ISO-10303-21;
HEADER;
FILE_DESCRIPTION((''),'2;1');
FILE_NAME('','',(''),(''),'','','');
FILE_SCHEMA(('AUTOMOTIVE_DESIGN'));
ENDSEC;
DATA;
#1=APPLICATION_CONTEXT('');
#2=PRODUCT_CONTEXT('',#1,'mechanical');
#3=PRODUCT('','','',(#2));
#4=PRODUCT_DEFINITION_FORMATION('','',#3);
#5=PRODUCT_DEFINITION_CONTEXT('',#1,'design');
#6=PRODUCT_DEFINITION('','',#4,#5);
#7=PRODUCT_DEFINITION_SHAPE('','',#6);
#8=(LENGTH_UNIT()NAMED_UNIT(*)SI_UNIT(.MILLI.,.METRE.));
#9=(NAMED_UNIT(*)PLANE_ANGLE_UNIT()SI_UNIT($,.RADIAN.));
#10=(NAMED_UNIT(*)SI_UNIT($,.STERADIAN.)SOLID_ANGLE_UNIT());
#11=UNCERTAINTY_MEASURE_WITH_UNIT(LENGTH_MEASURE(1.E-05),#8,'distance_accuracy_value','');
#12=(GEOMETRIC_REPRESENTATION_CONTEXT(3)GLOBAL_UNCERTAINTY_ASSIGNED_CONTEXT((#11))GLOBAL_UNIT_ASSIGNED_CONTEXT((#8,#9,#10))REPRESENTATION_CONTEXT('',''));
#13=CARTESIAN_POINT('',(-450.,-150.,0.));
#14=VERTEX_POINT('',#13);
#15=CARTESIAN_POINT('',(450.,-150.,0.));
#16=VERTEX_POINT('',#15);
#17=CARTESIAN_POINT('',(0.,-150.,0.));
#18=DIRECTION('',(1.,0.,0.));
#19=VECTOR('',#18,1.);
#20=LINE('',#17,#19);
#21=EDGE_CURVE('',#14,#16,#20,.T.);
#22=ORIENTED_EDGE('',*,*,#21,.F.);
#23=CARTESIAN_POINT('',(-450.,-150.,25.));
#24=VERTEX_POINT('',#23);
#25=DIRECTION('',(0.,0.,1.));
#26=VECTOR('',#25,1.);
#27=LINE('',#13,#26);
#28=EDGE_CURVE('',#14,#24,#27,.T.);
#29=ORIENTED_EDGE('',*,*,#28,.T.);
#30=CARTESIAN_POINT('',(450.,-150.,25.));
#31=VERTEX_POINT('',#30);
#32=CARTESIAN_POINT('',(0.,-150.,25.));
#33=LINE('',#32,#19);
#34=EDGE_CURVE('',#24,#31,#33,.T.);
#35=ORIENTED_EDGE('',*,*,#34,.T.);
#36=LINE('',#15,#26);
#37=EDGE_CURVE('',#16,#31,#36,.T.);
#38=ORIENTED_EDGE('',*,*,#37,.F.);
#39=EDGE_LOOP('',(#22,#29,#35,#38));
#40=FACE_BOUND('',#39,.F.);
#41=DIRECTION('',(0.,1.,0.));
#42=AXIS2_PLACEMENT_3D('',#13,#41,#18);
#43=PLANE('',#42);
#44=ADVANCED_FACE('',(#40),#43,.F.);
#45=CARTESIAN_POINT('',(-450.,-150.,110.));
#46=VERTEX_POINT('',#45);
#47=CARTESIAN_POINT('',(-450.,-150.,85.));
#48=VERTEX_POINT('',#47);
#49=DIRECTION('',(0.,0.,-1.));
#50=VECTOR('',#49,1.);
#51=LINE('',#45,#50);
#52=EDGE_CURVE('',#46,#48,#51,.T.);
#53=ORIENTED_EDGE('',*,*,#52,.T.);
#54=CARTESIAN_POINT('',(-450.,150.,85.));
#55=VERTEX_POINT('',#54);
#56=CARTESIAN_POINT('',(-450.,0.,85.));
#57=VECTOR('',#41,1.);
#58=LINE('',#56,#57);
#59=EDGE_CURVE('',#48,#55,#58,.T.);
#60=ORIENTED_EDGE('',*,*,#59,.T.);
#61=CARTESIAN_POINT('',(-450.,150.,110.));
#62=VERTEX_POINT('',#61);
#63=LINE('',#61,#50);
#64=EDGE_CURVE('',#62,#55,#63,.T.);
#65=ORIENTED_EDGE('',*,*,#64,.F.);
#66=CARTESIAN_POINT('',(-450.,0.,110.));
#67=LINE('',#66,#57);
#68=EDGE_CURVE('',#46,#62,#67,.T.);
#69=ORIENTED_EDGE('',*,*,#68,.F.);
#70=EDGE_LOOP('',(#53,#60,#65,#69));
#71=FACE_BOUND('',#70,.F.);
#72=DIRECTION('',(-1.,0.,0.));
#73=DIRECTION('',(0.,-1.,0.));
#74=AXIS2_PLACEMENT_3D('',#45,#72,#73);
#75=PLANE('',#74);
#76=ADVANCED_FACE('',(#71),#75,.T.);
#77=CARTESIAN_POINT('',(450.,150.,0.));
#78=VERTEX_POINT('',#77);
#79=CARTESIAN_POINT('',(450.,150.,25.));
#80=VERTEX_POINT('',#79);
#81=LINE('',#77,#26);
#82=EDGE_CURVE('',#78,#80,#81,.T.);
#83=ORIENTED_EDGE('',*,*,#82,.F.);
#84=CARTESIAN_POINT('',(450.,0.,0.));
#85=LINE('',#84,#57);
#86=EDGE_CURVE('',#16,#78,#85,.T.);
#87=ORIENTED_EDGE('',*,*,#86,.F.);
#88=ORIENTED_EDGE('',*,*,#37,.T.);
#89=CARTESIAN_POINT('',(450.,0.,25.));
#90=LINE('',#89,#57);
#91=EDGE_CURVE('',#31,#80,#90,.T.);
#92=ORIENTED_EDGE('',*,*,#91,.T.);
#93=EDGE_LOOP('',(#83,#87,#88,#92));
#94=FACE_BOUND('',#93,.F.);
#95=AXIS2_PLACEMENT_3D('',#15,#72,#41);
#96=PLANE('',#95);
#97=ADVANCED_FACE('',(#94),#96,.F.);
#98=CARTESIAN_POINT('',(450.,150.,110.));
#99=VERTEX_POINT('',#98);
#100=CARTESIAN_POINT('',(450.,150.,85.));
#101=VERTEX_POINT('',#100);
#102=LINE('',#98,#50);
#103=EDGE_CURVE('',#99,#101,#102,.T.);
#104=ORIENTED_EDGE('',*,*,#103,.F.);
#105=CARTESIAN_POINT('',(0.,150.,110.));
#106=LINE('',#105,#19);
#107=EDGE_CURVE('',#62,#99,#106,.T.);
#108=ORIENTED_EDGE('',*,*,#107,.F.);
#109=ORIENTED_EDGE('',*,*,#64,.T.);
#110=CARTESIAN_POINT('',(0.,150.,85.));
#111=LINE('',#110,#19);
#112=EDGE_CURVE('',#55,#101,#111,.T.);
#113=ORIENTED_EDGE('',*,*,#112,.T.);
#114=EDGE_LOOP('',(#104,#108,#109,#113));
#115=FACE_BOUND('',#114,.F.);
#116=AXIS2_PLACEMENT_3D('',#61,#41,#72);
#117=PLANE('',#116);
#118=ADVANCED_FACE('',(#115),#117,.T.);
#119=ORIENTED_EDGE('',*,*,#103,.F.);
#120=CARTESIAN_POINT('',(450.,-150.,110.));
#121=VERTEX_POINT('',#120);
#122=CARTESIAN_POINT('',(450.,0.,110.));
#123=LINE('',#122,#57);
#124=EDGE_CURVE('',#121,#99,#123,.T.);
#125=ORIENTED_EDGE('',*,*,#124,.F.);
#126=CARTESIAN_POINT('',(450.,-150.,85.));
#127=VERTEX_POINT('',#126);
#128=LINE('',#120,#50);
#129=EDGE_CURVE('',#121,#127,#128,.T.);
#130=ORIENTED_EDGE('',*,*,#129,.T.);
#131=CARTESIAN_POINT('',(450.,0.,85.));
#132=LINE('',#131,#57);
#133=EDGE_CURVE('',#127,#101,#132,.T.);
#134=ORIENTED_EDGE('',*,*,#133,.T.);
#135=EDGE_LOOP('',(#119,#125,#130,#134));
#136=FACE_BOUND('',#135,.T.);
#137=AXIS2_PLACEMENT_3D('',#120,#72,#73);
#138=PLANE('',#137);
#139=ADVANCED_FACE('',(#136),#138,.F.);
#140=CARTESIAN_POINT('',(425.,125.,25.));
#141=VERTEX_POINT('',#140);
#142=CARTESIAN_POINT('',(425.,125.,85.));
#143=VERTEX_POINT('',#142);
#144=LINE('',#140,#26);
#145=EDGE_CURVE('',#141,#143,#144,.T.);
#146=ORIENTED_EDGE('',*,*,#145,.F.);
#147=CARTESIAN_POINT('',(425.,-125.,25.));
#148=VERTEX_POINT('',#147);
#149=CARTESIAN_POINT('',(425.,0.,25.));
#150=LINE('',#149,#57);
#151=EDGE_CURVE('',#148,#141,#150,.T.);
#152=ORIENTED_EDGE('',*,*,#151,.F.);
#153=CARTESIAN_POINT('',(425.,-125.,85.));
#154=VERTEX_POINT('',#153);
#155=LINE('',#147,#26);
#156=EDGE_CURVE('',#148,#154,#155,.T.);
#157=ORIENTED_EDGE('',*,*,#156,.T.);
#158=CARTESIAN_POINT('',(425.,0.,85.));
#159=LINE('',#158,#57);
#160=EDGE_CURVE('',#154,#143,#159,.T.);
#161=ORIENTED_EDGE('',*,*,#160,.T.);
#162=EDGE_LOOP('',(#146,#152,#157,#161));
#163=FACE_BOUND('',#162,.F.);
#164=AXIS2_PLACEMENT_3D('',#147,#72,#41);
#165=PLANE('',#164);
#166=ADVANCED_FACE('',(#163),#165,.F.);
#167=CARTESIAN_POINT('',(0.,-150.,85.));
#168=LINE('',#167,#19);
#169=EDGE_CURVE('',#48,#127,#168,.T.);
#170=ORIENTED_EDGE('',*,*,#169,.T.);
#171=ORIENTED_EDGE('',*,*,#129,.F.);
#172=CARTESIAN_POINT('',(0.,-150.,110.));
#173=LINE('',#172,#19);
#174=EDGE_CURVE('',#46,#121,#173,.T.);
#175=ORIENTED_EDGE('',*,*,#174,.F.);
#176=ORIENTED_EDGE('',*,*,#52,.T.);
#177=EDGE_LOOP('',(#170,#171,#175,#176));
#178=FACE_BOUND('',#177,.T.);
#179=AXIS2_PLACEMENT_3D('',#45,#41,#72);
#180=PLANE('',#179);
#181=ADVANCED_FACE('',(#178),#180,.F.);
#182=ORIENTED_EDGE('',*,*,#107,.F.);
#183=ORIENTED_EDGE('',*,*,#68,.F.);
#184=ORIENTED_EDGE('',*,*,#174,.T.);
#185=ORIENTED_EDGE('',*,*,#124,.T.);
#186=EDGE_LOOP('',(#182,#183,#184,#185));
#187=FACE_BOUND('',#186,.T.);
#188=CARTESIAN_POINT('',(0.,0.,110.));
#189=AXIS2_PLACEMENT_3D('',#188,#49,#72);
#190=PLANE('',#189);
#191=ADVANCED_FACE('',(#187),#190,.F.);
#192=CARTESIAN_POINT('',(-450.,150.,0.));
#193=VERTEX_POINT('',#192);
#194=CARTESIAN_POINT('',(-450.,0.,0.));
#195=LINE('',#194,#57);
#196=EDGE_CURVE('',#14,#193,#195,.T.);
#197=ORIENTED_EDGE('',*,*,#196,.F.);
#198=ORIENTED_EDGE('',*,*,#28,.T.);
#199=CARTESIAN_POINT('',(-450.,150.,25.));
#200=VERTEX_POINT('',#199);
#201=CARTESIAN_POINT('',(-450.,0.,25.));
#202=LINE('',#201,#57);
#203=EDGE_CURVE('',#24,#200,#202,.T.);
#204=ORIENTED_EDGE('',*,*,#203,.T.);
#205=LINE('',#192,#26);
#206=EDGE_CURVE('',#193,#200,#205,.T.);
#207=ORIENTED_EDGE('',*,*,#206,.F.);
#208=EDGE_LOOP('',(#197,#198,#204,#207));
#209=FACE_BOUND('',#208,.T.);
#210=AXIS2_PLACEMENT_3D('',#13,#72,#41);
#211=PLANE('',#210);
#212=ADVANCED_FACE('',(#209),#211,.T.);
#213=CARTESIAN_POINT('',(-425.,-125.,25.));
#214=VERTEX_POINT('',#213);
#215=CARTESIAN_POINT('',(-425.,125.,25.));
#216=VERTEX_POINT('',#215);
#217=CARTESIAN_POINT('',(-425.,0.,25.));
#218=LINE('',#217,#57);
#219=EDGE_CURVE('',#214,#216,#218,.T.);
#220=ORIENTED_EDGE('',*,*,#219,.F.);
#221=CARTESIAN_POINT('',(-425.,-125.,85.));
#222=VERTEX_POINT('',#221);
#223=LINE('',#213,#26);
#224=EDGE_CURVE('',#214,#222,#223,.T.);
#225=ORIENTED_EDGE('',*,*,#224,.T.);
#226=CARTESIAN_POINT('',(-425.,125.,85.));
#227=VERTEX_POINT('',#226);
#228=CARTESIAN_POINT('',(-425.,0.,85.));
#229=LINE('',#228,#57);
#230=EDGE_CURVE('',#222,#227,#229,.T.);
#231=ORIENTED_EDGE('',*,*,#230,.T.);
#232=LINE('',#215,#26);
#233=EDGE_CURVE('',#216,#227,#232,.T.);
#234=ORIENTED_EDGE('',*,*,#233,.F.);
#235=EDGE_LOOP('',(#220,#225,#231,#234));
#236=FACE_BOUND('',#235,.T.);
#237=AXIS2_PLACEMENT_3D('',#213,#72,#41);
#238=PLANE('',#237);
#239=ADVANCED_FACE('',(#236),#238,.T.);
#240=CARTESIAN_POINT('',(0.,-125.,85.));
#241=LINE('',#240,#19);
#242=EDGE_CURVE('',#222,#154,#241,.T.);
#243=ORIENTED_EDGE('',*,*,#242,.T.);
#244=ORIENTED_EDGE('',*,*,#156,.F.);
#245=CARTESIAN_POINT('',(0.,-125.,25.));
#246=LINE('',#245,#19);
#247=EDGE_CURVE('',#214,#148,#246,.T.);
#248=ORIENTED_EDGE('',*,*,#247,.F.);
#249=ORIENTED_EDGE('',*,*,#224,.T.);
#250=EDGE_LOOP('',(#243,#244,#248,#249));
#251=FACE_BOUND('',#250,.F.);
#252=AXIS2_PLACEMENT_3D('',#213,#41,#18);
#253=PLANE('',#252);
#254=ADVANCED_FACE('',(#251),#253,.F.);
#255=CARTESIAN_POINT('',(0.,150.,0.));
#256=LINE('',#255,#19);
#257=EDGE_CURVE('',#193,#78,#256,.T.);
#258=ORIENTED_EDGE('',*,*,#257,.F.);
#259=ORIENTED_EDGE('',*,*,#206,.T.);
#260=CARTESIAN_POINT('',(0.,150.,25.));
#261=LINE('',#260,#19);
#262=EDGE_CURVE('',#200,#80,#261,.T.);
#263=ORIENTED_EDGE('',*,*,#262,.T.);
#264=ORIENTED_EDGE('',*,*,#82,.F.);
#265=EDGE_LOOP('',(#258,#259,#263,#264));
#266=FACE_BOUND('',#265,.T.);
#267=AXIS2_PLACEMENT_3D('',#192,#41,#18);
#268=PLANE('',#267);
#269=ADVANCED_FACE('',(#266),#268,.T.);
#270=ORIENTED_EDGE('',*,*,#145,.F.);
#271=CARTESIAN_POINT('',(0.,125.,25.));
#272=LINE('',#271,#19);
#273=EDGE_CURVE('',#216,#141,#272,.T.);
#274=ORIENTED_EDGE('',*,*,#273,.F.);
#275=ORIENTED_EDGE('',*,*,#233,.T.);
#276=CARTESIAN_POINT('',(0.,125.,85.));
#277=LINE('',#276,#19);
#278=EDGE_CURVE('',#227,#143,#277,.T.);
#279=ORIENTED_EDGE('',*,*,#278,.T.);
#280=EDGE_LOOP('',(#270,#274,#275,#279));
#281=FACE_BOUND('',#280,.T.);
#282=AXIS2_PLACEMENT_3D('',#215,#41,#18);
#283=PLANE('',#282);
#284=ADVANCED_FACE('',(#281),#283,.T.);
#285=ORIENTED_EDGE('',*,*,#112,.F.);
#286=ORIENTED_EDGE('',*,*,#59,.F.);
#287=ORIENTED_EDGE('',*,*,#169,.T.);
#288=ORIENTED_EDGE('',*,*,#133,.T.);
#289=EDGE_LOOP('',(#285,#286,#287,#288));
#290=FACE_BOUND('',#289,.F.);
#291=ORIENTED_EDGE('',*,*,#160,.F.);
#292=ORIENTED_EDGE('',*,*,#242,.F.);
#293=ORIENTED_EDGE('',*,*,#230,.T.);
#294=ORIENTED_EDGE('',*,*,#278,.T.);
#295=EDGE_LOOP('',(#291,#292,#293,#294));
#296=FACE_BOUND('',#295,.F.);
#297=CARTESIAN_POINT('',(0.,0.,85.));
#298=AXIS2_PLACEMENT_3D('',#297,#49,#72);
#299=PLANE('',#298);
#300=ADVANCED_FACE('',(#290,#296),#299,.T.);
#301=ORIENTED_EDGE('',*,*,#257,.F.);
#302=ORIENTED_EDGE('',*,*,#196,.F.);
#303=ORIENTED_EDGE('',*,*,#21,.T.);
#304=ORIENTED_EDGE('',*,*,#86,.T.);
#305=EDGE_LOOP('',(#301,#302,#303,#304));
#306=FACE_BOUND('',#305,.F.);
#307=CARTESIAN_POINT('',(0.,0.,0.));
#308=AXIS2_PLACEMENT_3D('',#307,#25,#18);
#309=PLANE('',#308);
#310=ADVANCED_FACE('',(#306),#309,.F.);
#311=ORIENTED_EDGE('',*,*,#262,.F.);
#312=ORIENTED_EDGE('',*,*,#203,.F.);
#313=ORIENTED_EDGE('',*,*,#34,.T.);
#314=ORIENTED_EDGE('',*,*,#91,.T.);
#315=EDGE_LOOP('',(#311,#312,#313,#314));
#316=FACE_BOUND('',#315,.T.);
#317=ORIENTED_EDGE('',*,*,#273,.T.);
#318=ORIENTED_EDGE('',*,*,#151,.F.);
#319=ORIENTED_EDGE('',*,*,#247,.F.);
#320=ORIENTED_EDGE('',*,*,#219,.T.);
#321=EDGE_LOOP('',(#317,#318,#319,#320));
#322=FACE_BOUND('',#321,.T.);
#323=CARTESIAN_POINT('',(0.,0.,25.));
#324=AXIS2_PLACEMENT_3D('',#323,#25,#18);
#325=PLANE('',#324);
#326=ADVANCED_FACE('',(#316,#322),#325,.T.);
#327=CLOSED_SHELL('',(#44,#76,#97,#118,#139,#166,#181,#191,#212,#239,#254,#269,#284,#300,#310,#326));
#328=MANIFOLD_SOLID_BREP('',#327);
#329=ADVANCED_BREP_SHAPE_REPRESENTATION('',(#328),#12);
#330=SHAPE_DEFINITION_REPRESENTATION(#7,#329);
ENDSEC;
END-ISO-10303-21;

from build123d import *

# Parameters (mm, degrees)
F0_W     = 900
F0_H     = 300
F1_DEPTH = 25
F2_W     = 850
F2_H     = 250
F3_DEPTH = 60


# Not quite as in the source:
# - a pattern or mirror of a feature is missing from the dataset's text; its kind, count and spacing are read off the source's solid


with BuildPart() as f1:
    # F0 (on Top) → F1 (new body)
    with BuildSketch(Plane.XY):
        Rectangle(F0_W, F0_H)
    extrude(amount=F1_DEPTH)


with BuildPart() as f1_copies_1:
    # F1_copies: instance of F1
    add(f1.part.mirror(Plane.XY.offset(55)))


with BuildPart() as f1_1:
    add(f1.part)

    add(f1_copies_1.part)  # F3 merges F1_copies_1
    # F2 (on face) → F3 (join)
    with BuildSketch(Plane.XY.offset(25)):
        Rectangle(F2_W, F2_H)
    extrude(amount=F3_DEPTH)


solid = f1_1.part
